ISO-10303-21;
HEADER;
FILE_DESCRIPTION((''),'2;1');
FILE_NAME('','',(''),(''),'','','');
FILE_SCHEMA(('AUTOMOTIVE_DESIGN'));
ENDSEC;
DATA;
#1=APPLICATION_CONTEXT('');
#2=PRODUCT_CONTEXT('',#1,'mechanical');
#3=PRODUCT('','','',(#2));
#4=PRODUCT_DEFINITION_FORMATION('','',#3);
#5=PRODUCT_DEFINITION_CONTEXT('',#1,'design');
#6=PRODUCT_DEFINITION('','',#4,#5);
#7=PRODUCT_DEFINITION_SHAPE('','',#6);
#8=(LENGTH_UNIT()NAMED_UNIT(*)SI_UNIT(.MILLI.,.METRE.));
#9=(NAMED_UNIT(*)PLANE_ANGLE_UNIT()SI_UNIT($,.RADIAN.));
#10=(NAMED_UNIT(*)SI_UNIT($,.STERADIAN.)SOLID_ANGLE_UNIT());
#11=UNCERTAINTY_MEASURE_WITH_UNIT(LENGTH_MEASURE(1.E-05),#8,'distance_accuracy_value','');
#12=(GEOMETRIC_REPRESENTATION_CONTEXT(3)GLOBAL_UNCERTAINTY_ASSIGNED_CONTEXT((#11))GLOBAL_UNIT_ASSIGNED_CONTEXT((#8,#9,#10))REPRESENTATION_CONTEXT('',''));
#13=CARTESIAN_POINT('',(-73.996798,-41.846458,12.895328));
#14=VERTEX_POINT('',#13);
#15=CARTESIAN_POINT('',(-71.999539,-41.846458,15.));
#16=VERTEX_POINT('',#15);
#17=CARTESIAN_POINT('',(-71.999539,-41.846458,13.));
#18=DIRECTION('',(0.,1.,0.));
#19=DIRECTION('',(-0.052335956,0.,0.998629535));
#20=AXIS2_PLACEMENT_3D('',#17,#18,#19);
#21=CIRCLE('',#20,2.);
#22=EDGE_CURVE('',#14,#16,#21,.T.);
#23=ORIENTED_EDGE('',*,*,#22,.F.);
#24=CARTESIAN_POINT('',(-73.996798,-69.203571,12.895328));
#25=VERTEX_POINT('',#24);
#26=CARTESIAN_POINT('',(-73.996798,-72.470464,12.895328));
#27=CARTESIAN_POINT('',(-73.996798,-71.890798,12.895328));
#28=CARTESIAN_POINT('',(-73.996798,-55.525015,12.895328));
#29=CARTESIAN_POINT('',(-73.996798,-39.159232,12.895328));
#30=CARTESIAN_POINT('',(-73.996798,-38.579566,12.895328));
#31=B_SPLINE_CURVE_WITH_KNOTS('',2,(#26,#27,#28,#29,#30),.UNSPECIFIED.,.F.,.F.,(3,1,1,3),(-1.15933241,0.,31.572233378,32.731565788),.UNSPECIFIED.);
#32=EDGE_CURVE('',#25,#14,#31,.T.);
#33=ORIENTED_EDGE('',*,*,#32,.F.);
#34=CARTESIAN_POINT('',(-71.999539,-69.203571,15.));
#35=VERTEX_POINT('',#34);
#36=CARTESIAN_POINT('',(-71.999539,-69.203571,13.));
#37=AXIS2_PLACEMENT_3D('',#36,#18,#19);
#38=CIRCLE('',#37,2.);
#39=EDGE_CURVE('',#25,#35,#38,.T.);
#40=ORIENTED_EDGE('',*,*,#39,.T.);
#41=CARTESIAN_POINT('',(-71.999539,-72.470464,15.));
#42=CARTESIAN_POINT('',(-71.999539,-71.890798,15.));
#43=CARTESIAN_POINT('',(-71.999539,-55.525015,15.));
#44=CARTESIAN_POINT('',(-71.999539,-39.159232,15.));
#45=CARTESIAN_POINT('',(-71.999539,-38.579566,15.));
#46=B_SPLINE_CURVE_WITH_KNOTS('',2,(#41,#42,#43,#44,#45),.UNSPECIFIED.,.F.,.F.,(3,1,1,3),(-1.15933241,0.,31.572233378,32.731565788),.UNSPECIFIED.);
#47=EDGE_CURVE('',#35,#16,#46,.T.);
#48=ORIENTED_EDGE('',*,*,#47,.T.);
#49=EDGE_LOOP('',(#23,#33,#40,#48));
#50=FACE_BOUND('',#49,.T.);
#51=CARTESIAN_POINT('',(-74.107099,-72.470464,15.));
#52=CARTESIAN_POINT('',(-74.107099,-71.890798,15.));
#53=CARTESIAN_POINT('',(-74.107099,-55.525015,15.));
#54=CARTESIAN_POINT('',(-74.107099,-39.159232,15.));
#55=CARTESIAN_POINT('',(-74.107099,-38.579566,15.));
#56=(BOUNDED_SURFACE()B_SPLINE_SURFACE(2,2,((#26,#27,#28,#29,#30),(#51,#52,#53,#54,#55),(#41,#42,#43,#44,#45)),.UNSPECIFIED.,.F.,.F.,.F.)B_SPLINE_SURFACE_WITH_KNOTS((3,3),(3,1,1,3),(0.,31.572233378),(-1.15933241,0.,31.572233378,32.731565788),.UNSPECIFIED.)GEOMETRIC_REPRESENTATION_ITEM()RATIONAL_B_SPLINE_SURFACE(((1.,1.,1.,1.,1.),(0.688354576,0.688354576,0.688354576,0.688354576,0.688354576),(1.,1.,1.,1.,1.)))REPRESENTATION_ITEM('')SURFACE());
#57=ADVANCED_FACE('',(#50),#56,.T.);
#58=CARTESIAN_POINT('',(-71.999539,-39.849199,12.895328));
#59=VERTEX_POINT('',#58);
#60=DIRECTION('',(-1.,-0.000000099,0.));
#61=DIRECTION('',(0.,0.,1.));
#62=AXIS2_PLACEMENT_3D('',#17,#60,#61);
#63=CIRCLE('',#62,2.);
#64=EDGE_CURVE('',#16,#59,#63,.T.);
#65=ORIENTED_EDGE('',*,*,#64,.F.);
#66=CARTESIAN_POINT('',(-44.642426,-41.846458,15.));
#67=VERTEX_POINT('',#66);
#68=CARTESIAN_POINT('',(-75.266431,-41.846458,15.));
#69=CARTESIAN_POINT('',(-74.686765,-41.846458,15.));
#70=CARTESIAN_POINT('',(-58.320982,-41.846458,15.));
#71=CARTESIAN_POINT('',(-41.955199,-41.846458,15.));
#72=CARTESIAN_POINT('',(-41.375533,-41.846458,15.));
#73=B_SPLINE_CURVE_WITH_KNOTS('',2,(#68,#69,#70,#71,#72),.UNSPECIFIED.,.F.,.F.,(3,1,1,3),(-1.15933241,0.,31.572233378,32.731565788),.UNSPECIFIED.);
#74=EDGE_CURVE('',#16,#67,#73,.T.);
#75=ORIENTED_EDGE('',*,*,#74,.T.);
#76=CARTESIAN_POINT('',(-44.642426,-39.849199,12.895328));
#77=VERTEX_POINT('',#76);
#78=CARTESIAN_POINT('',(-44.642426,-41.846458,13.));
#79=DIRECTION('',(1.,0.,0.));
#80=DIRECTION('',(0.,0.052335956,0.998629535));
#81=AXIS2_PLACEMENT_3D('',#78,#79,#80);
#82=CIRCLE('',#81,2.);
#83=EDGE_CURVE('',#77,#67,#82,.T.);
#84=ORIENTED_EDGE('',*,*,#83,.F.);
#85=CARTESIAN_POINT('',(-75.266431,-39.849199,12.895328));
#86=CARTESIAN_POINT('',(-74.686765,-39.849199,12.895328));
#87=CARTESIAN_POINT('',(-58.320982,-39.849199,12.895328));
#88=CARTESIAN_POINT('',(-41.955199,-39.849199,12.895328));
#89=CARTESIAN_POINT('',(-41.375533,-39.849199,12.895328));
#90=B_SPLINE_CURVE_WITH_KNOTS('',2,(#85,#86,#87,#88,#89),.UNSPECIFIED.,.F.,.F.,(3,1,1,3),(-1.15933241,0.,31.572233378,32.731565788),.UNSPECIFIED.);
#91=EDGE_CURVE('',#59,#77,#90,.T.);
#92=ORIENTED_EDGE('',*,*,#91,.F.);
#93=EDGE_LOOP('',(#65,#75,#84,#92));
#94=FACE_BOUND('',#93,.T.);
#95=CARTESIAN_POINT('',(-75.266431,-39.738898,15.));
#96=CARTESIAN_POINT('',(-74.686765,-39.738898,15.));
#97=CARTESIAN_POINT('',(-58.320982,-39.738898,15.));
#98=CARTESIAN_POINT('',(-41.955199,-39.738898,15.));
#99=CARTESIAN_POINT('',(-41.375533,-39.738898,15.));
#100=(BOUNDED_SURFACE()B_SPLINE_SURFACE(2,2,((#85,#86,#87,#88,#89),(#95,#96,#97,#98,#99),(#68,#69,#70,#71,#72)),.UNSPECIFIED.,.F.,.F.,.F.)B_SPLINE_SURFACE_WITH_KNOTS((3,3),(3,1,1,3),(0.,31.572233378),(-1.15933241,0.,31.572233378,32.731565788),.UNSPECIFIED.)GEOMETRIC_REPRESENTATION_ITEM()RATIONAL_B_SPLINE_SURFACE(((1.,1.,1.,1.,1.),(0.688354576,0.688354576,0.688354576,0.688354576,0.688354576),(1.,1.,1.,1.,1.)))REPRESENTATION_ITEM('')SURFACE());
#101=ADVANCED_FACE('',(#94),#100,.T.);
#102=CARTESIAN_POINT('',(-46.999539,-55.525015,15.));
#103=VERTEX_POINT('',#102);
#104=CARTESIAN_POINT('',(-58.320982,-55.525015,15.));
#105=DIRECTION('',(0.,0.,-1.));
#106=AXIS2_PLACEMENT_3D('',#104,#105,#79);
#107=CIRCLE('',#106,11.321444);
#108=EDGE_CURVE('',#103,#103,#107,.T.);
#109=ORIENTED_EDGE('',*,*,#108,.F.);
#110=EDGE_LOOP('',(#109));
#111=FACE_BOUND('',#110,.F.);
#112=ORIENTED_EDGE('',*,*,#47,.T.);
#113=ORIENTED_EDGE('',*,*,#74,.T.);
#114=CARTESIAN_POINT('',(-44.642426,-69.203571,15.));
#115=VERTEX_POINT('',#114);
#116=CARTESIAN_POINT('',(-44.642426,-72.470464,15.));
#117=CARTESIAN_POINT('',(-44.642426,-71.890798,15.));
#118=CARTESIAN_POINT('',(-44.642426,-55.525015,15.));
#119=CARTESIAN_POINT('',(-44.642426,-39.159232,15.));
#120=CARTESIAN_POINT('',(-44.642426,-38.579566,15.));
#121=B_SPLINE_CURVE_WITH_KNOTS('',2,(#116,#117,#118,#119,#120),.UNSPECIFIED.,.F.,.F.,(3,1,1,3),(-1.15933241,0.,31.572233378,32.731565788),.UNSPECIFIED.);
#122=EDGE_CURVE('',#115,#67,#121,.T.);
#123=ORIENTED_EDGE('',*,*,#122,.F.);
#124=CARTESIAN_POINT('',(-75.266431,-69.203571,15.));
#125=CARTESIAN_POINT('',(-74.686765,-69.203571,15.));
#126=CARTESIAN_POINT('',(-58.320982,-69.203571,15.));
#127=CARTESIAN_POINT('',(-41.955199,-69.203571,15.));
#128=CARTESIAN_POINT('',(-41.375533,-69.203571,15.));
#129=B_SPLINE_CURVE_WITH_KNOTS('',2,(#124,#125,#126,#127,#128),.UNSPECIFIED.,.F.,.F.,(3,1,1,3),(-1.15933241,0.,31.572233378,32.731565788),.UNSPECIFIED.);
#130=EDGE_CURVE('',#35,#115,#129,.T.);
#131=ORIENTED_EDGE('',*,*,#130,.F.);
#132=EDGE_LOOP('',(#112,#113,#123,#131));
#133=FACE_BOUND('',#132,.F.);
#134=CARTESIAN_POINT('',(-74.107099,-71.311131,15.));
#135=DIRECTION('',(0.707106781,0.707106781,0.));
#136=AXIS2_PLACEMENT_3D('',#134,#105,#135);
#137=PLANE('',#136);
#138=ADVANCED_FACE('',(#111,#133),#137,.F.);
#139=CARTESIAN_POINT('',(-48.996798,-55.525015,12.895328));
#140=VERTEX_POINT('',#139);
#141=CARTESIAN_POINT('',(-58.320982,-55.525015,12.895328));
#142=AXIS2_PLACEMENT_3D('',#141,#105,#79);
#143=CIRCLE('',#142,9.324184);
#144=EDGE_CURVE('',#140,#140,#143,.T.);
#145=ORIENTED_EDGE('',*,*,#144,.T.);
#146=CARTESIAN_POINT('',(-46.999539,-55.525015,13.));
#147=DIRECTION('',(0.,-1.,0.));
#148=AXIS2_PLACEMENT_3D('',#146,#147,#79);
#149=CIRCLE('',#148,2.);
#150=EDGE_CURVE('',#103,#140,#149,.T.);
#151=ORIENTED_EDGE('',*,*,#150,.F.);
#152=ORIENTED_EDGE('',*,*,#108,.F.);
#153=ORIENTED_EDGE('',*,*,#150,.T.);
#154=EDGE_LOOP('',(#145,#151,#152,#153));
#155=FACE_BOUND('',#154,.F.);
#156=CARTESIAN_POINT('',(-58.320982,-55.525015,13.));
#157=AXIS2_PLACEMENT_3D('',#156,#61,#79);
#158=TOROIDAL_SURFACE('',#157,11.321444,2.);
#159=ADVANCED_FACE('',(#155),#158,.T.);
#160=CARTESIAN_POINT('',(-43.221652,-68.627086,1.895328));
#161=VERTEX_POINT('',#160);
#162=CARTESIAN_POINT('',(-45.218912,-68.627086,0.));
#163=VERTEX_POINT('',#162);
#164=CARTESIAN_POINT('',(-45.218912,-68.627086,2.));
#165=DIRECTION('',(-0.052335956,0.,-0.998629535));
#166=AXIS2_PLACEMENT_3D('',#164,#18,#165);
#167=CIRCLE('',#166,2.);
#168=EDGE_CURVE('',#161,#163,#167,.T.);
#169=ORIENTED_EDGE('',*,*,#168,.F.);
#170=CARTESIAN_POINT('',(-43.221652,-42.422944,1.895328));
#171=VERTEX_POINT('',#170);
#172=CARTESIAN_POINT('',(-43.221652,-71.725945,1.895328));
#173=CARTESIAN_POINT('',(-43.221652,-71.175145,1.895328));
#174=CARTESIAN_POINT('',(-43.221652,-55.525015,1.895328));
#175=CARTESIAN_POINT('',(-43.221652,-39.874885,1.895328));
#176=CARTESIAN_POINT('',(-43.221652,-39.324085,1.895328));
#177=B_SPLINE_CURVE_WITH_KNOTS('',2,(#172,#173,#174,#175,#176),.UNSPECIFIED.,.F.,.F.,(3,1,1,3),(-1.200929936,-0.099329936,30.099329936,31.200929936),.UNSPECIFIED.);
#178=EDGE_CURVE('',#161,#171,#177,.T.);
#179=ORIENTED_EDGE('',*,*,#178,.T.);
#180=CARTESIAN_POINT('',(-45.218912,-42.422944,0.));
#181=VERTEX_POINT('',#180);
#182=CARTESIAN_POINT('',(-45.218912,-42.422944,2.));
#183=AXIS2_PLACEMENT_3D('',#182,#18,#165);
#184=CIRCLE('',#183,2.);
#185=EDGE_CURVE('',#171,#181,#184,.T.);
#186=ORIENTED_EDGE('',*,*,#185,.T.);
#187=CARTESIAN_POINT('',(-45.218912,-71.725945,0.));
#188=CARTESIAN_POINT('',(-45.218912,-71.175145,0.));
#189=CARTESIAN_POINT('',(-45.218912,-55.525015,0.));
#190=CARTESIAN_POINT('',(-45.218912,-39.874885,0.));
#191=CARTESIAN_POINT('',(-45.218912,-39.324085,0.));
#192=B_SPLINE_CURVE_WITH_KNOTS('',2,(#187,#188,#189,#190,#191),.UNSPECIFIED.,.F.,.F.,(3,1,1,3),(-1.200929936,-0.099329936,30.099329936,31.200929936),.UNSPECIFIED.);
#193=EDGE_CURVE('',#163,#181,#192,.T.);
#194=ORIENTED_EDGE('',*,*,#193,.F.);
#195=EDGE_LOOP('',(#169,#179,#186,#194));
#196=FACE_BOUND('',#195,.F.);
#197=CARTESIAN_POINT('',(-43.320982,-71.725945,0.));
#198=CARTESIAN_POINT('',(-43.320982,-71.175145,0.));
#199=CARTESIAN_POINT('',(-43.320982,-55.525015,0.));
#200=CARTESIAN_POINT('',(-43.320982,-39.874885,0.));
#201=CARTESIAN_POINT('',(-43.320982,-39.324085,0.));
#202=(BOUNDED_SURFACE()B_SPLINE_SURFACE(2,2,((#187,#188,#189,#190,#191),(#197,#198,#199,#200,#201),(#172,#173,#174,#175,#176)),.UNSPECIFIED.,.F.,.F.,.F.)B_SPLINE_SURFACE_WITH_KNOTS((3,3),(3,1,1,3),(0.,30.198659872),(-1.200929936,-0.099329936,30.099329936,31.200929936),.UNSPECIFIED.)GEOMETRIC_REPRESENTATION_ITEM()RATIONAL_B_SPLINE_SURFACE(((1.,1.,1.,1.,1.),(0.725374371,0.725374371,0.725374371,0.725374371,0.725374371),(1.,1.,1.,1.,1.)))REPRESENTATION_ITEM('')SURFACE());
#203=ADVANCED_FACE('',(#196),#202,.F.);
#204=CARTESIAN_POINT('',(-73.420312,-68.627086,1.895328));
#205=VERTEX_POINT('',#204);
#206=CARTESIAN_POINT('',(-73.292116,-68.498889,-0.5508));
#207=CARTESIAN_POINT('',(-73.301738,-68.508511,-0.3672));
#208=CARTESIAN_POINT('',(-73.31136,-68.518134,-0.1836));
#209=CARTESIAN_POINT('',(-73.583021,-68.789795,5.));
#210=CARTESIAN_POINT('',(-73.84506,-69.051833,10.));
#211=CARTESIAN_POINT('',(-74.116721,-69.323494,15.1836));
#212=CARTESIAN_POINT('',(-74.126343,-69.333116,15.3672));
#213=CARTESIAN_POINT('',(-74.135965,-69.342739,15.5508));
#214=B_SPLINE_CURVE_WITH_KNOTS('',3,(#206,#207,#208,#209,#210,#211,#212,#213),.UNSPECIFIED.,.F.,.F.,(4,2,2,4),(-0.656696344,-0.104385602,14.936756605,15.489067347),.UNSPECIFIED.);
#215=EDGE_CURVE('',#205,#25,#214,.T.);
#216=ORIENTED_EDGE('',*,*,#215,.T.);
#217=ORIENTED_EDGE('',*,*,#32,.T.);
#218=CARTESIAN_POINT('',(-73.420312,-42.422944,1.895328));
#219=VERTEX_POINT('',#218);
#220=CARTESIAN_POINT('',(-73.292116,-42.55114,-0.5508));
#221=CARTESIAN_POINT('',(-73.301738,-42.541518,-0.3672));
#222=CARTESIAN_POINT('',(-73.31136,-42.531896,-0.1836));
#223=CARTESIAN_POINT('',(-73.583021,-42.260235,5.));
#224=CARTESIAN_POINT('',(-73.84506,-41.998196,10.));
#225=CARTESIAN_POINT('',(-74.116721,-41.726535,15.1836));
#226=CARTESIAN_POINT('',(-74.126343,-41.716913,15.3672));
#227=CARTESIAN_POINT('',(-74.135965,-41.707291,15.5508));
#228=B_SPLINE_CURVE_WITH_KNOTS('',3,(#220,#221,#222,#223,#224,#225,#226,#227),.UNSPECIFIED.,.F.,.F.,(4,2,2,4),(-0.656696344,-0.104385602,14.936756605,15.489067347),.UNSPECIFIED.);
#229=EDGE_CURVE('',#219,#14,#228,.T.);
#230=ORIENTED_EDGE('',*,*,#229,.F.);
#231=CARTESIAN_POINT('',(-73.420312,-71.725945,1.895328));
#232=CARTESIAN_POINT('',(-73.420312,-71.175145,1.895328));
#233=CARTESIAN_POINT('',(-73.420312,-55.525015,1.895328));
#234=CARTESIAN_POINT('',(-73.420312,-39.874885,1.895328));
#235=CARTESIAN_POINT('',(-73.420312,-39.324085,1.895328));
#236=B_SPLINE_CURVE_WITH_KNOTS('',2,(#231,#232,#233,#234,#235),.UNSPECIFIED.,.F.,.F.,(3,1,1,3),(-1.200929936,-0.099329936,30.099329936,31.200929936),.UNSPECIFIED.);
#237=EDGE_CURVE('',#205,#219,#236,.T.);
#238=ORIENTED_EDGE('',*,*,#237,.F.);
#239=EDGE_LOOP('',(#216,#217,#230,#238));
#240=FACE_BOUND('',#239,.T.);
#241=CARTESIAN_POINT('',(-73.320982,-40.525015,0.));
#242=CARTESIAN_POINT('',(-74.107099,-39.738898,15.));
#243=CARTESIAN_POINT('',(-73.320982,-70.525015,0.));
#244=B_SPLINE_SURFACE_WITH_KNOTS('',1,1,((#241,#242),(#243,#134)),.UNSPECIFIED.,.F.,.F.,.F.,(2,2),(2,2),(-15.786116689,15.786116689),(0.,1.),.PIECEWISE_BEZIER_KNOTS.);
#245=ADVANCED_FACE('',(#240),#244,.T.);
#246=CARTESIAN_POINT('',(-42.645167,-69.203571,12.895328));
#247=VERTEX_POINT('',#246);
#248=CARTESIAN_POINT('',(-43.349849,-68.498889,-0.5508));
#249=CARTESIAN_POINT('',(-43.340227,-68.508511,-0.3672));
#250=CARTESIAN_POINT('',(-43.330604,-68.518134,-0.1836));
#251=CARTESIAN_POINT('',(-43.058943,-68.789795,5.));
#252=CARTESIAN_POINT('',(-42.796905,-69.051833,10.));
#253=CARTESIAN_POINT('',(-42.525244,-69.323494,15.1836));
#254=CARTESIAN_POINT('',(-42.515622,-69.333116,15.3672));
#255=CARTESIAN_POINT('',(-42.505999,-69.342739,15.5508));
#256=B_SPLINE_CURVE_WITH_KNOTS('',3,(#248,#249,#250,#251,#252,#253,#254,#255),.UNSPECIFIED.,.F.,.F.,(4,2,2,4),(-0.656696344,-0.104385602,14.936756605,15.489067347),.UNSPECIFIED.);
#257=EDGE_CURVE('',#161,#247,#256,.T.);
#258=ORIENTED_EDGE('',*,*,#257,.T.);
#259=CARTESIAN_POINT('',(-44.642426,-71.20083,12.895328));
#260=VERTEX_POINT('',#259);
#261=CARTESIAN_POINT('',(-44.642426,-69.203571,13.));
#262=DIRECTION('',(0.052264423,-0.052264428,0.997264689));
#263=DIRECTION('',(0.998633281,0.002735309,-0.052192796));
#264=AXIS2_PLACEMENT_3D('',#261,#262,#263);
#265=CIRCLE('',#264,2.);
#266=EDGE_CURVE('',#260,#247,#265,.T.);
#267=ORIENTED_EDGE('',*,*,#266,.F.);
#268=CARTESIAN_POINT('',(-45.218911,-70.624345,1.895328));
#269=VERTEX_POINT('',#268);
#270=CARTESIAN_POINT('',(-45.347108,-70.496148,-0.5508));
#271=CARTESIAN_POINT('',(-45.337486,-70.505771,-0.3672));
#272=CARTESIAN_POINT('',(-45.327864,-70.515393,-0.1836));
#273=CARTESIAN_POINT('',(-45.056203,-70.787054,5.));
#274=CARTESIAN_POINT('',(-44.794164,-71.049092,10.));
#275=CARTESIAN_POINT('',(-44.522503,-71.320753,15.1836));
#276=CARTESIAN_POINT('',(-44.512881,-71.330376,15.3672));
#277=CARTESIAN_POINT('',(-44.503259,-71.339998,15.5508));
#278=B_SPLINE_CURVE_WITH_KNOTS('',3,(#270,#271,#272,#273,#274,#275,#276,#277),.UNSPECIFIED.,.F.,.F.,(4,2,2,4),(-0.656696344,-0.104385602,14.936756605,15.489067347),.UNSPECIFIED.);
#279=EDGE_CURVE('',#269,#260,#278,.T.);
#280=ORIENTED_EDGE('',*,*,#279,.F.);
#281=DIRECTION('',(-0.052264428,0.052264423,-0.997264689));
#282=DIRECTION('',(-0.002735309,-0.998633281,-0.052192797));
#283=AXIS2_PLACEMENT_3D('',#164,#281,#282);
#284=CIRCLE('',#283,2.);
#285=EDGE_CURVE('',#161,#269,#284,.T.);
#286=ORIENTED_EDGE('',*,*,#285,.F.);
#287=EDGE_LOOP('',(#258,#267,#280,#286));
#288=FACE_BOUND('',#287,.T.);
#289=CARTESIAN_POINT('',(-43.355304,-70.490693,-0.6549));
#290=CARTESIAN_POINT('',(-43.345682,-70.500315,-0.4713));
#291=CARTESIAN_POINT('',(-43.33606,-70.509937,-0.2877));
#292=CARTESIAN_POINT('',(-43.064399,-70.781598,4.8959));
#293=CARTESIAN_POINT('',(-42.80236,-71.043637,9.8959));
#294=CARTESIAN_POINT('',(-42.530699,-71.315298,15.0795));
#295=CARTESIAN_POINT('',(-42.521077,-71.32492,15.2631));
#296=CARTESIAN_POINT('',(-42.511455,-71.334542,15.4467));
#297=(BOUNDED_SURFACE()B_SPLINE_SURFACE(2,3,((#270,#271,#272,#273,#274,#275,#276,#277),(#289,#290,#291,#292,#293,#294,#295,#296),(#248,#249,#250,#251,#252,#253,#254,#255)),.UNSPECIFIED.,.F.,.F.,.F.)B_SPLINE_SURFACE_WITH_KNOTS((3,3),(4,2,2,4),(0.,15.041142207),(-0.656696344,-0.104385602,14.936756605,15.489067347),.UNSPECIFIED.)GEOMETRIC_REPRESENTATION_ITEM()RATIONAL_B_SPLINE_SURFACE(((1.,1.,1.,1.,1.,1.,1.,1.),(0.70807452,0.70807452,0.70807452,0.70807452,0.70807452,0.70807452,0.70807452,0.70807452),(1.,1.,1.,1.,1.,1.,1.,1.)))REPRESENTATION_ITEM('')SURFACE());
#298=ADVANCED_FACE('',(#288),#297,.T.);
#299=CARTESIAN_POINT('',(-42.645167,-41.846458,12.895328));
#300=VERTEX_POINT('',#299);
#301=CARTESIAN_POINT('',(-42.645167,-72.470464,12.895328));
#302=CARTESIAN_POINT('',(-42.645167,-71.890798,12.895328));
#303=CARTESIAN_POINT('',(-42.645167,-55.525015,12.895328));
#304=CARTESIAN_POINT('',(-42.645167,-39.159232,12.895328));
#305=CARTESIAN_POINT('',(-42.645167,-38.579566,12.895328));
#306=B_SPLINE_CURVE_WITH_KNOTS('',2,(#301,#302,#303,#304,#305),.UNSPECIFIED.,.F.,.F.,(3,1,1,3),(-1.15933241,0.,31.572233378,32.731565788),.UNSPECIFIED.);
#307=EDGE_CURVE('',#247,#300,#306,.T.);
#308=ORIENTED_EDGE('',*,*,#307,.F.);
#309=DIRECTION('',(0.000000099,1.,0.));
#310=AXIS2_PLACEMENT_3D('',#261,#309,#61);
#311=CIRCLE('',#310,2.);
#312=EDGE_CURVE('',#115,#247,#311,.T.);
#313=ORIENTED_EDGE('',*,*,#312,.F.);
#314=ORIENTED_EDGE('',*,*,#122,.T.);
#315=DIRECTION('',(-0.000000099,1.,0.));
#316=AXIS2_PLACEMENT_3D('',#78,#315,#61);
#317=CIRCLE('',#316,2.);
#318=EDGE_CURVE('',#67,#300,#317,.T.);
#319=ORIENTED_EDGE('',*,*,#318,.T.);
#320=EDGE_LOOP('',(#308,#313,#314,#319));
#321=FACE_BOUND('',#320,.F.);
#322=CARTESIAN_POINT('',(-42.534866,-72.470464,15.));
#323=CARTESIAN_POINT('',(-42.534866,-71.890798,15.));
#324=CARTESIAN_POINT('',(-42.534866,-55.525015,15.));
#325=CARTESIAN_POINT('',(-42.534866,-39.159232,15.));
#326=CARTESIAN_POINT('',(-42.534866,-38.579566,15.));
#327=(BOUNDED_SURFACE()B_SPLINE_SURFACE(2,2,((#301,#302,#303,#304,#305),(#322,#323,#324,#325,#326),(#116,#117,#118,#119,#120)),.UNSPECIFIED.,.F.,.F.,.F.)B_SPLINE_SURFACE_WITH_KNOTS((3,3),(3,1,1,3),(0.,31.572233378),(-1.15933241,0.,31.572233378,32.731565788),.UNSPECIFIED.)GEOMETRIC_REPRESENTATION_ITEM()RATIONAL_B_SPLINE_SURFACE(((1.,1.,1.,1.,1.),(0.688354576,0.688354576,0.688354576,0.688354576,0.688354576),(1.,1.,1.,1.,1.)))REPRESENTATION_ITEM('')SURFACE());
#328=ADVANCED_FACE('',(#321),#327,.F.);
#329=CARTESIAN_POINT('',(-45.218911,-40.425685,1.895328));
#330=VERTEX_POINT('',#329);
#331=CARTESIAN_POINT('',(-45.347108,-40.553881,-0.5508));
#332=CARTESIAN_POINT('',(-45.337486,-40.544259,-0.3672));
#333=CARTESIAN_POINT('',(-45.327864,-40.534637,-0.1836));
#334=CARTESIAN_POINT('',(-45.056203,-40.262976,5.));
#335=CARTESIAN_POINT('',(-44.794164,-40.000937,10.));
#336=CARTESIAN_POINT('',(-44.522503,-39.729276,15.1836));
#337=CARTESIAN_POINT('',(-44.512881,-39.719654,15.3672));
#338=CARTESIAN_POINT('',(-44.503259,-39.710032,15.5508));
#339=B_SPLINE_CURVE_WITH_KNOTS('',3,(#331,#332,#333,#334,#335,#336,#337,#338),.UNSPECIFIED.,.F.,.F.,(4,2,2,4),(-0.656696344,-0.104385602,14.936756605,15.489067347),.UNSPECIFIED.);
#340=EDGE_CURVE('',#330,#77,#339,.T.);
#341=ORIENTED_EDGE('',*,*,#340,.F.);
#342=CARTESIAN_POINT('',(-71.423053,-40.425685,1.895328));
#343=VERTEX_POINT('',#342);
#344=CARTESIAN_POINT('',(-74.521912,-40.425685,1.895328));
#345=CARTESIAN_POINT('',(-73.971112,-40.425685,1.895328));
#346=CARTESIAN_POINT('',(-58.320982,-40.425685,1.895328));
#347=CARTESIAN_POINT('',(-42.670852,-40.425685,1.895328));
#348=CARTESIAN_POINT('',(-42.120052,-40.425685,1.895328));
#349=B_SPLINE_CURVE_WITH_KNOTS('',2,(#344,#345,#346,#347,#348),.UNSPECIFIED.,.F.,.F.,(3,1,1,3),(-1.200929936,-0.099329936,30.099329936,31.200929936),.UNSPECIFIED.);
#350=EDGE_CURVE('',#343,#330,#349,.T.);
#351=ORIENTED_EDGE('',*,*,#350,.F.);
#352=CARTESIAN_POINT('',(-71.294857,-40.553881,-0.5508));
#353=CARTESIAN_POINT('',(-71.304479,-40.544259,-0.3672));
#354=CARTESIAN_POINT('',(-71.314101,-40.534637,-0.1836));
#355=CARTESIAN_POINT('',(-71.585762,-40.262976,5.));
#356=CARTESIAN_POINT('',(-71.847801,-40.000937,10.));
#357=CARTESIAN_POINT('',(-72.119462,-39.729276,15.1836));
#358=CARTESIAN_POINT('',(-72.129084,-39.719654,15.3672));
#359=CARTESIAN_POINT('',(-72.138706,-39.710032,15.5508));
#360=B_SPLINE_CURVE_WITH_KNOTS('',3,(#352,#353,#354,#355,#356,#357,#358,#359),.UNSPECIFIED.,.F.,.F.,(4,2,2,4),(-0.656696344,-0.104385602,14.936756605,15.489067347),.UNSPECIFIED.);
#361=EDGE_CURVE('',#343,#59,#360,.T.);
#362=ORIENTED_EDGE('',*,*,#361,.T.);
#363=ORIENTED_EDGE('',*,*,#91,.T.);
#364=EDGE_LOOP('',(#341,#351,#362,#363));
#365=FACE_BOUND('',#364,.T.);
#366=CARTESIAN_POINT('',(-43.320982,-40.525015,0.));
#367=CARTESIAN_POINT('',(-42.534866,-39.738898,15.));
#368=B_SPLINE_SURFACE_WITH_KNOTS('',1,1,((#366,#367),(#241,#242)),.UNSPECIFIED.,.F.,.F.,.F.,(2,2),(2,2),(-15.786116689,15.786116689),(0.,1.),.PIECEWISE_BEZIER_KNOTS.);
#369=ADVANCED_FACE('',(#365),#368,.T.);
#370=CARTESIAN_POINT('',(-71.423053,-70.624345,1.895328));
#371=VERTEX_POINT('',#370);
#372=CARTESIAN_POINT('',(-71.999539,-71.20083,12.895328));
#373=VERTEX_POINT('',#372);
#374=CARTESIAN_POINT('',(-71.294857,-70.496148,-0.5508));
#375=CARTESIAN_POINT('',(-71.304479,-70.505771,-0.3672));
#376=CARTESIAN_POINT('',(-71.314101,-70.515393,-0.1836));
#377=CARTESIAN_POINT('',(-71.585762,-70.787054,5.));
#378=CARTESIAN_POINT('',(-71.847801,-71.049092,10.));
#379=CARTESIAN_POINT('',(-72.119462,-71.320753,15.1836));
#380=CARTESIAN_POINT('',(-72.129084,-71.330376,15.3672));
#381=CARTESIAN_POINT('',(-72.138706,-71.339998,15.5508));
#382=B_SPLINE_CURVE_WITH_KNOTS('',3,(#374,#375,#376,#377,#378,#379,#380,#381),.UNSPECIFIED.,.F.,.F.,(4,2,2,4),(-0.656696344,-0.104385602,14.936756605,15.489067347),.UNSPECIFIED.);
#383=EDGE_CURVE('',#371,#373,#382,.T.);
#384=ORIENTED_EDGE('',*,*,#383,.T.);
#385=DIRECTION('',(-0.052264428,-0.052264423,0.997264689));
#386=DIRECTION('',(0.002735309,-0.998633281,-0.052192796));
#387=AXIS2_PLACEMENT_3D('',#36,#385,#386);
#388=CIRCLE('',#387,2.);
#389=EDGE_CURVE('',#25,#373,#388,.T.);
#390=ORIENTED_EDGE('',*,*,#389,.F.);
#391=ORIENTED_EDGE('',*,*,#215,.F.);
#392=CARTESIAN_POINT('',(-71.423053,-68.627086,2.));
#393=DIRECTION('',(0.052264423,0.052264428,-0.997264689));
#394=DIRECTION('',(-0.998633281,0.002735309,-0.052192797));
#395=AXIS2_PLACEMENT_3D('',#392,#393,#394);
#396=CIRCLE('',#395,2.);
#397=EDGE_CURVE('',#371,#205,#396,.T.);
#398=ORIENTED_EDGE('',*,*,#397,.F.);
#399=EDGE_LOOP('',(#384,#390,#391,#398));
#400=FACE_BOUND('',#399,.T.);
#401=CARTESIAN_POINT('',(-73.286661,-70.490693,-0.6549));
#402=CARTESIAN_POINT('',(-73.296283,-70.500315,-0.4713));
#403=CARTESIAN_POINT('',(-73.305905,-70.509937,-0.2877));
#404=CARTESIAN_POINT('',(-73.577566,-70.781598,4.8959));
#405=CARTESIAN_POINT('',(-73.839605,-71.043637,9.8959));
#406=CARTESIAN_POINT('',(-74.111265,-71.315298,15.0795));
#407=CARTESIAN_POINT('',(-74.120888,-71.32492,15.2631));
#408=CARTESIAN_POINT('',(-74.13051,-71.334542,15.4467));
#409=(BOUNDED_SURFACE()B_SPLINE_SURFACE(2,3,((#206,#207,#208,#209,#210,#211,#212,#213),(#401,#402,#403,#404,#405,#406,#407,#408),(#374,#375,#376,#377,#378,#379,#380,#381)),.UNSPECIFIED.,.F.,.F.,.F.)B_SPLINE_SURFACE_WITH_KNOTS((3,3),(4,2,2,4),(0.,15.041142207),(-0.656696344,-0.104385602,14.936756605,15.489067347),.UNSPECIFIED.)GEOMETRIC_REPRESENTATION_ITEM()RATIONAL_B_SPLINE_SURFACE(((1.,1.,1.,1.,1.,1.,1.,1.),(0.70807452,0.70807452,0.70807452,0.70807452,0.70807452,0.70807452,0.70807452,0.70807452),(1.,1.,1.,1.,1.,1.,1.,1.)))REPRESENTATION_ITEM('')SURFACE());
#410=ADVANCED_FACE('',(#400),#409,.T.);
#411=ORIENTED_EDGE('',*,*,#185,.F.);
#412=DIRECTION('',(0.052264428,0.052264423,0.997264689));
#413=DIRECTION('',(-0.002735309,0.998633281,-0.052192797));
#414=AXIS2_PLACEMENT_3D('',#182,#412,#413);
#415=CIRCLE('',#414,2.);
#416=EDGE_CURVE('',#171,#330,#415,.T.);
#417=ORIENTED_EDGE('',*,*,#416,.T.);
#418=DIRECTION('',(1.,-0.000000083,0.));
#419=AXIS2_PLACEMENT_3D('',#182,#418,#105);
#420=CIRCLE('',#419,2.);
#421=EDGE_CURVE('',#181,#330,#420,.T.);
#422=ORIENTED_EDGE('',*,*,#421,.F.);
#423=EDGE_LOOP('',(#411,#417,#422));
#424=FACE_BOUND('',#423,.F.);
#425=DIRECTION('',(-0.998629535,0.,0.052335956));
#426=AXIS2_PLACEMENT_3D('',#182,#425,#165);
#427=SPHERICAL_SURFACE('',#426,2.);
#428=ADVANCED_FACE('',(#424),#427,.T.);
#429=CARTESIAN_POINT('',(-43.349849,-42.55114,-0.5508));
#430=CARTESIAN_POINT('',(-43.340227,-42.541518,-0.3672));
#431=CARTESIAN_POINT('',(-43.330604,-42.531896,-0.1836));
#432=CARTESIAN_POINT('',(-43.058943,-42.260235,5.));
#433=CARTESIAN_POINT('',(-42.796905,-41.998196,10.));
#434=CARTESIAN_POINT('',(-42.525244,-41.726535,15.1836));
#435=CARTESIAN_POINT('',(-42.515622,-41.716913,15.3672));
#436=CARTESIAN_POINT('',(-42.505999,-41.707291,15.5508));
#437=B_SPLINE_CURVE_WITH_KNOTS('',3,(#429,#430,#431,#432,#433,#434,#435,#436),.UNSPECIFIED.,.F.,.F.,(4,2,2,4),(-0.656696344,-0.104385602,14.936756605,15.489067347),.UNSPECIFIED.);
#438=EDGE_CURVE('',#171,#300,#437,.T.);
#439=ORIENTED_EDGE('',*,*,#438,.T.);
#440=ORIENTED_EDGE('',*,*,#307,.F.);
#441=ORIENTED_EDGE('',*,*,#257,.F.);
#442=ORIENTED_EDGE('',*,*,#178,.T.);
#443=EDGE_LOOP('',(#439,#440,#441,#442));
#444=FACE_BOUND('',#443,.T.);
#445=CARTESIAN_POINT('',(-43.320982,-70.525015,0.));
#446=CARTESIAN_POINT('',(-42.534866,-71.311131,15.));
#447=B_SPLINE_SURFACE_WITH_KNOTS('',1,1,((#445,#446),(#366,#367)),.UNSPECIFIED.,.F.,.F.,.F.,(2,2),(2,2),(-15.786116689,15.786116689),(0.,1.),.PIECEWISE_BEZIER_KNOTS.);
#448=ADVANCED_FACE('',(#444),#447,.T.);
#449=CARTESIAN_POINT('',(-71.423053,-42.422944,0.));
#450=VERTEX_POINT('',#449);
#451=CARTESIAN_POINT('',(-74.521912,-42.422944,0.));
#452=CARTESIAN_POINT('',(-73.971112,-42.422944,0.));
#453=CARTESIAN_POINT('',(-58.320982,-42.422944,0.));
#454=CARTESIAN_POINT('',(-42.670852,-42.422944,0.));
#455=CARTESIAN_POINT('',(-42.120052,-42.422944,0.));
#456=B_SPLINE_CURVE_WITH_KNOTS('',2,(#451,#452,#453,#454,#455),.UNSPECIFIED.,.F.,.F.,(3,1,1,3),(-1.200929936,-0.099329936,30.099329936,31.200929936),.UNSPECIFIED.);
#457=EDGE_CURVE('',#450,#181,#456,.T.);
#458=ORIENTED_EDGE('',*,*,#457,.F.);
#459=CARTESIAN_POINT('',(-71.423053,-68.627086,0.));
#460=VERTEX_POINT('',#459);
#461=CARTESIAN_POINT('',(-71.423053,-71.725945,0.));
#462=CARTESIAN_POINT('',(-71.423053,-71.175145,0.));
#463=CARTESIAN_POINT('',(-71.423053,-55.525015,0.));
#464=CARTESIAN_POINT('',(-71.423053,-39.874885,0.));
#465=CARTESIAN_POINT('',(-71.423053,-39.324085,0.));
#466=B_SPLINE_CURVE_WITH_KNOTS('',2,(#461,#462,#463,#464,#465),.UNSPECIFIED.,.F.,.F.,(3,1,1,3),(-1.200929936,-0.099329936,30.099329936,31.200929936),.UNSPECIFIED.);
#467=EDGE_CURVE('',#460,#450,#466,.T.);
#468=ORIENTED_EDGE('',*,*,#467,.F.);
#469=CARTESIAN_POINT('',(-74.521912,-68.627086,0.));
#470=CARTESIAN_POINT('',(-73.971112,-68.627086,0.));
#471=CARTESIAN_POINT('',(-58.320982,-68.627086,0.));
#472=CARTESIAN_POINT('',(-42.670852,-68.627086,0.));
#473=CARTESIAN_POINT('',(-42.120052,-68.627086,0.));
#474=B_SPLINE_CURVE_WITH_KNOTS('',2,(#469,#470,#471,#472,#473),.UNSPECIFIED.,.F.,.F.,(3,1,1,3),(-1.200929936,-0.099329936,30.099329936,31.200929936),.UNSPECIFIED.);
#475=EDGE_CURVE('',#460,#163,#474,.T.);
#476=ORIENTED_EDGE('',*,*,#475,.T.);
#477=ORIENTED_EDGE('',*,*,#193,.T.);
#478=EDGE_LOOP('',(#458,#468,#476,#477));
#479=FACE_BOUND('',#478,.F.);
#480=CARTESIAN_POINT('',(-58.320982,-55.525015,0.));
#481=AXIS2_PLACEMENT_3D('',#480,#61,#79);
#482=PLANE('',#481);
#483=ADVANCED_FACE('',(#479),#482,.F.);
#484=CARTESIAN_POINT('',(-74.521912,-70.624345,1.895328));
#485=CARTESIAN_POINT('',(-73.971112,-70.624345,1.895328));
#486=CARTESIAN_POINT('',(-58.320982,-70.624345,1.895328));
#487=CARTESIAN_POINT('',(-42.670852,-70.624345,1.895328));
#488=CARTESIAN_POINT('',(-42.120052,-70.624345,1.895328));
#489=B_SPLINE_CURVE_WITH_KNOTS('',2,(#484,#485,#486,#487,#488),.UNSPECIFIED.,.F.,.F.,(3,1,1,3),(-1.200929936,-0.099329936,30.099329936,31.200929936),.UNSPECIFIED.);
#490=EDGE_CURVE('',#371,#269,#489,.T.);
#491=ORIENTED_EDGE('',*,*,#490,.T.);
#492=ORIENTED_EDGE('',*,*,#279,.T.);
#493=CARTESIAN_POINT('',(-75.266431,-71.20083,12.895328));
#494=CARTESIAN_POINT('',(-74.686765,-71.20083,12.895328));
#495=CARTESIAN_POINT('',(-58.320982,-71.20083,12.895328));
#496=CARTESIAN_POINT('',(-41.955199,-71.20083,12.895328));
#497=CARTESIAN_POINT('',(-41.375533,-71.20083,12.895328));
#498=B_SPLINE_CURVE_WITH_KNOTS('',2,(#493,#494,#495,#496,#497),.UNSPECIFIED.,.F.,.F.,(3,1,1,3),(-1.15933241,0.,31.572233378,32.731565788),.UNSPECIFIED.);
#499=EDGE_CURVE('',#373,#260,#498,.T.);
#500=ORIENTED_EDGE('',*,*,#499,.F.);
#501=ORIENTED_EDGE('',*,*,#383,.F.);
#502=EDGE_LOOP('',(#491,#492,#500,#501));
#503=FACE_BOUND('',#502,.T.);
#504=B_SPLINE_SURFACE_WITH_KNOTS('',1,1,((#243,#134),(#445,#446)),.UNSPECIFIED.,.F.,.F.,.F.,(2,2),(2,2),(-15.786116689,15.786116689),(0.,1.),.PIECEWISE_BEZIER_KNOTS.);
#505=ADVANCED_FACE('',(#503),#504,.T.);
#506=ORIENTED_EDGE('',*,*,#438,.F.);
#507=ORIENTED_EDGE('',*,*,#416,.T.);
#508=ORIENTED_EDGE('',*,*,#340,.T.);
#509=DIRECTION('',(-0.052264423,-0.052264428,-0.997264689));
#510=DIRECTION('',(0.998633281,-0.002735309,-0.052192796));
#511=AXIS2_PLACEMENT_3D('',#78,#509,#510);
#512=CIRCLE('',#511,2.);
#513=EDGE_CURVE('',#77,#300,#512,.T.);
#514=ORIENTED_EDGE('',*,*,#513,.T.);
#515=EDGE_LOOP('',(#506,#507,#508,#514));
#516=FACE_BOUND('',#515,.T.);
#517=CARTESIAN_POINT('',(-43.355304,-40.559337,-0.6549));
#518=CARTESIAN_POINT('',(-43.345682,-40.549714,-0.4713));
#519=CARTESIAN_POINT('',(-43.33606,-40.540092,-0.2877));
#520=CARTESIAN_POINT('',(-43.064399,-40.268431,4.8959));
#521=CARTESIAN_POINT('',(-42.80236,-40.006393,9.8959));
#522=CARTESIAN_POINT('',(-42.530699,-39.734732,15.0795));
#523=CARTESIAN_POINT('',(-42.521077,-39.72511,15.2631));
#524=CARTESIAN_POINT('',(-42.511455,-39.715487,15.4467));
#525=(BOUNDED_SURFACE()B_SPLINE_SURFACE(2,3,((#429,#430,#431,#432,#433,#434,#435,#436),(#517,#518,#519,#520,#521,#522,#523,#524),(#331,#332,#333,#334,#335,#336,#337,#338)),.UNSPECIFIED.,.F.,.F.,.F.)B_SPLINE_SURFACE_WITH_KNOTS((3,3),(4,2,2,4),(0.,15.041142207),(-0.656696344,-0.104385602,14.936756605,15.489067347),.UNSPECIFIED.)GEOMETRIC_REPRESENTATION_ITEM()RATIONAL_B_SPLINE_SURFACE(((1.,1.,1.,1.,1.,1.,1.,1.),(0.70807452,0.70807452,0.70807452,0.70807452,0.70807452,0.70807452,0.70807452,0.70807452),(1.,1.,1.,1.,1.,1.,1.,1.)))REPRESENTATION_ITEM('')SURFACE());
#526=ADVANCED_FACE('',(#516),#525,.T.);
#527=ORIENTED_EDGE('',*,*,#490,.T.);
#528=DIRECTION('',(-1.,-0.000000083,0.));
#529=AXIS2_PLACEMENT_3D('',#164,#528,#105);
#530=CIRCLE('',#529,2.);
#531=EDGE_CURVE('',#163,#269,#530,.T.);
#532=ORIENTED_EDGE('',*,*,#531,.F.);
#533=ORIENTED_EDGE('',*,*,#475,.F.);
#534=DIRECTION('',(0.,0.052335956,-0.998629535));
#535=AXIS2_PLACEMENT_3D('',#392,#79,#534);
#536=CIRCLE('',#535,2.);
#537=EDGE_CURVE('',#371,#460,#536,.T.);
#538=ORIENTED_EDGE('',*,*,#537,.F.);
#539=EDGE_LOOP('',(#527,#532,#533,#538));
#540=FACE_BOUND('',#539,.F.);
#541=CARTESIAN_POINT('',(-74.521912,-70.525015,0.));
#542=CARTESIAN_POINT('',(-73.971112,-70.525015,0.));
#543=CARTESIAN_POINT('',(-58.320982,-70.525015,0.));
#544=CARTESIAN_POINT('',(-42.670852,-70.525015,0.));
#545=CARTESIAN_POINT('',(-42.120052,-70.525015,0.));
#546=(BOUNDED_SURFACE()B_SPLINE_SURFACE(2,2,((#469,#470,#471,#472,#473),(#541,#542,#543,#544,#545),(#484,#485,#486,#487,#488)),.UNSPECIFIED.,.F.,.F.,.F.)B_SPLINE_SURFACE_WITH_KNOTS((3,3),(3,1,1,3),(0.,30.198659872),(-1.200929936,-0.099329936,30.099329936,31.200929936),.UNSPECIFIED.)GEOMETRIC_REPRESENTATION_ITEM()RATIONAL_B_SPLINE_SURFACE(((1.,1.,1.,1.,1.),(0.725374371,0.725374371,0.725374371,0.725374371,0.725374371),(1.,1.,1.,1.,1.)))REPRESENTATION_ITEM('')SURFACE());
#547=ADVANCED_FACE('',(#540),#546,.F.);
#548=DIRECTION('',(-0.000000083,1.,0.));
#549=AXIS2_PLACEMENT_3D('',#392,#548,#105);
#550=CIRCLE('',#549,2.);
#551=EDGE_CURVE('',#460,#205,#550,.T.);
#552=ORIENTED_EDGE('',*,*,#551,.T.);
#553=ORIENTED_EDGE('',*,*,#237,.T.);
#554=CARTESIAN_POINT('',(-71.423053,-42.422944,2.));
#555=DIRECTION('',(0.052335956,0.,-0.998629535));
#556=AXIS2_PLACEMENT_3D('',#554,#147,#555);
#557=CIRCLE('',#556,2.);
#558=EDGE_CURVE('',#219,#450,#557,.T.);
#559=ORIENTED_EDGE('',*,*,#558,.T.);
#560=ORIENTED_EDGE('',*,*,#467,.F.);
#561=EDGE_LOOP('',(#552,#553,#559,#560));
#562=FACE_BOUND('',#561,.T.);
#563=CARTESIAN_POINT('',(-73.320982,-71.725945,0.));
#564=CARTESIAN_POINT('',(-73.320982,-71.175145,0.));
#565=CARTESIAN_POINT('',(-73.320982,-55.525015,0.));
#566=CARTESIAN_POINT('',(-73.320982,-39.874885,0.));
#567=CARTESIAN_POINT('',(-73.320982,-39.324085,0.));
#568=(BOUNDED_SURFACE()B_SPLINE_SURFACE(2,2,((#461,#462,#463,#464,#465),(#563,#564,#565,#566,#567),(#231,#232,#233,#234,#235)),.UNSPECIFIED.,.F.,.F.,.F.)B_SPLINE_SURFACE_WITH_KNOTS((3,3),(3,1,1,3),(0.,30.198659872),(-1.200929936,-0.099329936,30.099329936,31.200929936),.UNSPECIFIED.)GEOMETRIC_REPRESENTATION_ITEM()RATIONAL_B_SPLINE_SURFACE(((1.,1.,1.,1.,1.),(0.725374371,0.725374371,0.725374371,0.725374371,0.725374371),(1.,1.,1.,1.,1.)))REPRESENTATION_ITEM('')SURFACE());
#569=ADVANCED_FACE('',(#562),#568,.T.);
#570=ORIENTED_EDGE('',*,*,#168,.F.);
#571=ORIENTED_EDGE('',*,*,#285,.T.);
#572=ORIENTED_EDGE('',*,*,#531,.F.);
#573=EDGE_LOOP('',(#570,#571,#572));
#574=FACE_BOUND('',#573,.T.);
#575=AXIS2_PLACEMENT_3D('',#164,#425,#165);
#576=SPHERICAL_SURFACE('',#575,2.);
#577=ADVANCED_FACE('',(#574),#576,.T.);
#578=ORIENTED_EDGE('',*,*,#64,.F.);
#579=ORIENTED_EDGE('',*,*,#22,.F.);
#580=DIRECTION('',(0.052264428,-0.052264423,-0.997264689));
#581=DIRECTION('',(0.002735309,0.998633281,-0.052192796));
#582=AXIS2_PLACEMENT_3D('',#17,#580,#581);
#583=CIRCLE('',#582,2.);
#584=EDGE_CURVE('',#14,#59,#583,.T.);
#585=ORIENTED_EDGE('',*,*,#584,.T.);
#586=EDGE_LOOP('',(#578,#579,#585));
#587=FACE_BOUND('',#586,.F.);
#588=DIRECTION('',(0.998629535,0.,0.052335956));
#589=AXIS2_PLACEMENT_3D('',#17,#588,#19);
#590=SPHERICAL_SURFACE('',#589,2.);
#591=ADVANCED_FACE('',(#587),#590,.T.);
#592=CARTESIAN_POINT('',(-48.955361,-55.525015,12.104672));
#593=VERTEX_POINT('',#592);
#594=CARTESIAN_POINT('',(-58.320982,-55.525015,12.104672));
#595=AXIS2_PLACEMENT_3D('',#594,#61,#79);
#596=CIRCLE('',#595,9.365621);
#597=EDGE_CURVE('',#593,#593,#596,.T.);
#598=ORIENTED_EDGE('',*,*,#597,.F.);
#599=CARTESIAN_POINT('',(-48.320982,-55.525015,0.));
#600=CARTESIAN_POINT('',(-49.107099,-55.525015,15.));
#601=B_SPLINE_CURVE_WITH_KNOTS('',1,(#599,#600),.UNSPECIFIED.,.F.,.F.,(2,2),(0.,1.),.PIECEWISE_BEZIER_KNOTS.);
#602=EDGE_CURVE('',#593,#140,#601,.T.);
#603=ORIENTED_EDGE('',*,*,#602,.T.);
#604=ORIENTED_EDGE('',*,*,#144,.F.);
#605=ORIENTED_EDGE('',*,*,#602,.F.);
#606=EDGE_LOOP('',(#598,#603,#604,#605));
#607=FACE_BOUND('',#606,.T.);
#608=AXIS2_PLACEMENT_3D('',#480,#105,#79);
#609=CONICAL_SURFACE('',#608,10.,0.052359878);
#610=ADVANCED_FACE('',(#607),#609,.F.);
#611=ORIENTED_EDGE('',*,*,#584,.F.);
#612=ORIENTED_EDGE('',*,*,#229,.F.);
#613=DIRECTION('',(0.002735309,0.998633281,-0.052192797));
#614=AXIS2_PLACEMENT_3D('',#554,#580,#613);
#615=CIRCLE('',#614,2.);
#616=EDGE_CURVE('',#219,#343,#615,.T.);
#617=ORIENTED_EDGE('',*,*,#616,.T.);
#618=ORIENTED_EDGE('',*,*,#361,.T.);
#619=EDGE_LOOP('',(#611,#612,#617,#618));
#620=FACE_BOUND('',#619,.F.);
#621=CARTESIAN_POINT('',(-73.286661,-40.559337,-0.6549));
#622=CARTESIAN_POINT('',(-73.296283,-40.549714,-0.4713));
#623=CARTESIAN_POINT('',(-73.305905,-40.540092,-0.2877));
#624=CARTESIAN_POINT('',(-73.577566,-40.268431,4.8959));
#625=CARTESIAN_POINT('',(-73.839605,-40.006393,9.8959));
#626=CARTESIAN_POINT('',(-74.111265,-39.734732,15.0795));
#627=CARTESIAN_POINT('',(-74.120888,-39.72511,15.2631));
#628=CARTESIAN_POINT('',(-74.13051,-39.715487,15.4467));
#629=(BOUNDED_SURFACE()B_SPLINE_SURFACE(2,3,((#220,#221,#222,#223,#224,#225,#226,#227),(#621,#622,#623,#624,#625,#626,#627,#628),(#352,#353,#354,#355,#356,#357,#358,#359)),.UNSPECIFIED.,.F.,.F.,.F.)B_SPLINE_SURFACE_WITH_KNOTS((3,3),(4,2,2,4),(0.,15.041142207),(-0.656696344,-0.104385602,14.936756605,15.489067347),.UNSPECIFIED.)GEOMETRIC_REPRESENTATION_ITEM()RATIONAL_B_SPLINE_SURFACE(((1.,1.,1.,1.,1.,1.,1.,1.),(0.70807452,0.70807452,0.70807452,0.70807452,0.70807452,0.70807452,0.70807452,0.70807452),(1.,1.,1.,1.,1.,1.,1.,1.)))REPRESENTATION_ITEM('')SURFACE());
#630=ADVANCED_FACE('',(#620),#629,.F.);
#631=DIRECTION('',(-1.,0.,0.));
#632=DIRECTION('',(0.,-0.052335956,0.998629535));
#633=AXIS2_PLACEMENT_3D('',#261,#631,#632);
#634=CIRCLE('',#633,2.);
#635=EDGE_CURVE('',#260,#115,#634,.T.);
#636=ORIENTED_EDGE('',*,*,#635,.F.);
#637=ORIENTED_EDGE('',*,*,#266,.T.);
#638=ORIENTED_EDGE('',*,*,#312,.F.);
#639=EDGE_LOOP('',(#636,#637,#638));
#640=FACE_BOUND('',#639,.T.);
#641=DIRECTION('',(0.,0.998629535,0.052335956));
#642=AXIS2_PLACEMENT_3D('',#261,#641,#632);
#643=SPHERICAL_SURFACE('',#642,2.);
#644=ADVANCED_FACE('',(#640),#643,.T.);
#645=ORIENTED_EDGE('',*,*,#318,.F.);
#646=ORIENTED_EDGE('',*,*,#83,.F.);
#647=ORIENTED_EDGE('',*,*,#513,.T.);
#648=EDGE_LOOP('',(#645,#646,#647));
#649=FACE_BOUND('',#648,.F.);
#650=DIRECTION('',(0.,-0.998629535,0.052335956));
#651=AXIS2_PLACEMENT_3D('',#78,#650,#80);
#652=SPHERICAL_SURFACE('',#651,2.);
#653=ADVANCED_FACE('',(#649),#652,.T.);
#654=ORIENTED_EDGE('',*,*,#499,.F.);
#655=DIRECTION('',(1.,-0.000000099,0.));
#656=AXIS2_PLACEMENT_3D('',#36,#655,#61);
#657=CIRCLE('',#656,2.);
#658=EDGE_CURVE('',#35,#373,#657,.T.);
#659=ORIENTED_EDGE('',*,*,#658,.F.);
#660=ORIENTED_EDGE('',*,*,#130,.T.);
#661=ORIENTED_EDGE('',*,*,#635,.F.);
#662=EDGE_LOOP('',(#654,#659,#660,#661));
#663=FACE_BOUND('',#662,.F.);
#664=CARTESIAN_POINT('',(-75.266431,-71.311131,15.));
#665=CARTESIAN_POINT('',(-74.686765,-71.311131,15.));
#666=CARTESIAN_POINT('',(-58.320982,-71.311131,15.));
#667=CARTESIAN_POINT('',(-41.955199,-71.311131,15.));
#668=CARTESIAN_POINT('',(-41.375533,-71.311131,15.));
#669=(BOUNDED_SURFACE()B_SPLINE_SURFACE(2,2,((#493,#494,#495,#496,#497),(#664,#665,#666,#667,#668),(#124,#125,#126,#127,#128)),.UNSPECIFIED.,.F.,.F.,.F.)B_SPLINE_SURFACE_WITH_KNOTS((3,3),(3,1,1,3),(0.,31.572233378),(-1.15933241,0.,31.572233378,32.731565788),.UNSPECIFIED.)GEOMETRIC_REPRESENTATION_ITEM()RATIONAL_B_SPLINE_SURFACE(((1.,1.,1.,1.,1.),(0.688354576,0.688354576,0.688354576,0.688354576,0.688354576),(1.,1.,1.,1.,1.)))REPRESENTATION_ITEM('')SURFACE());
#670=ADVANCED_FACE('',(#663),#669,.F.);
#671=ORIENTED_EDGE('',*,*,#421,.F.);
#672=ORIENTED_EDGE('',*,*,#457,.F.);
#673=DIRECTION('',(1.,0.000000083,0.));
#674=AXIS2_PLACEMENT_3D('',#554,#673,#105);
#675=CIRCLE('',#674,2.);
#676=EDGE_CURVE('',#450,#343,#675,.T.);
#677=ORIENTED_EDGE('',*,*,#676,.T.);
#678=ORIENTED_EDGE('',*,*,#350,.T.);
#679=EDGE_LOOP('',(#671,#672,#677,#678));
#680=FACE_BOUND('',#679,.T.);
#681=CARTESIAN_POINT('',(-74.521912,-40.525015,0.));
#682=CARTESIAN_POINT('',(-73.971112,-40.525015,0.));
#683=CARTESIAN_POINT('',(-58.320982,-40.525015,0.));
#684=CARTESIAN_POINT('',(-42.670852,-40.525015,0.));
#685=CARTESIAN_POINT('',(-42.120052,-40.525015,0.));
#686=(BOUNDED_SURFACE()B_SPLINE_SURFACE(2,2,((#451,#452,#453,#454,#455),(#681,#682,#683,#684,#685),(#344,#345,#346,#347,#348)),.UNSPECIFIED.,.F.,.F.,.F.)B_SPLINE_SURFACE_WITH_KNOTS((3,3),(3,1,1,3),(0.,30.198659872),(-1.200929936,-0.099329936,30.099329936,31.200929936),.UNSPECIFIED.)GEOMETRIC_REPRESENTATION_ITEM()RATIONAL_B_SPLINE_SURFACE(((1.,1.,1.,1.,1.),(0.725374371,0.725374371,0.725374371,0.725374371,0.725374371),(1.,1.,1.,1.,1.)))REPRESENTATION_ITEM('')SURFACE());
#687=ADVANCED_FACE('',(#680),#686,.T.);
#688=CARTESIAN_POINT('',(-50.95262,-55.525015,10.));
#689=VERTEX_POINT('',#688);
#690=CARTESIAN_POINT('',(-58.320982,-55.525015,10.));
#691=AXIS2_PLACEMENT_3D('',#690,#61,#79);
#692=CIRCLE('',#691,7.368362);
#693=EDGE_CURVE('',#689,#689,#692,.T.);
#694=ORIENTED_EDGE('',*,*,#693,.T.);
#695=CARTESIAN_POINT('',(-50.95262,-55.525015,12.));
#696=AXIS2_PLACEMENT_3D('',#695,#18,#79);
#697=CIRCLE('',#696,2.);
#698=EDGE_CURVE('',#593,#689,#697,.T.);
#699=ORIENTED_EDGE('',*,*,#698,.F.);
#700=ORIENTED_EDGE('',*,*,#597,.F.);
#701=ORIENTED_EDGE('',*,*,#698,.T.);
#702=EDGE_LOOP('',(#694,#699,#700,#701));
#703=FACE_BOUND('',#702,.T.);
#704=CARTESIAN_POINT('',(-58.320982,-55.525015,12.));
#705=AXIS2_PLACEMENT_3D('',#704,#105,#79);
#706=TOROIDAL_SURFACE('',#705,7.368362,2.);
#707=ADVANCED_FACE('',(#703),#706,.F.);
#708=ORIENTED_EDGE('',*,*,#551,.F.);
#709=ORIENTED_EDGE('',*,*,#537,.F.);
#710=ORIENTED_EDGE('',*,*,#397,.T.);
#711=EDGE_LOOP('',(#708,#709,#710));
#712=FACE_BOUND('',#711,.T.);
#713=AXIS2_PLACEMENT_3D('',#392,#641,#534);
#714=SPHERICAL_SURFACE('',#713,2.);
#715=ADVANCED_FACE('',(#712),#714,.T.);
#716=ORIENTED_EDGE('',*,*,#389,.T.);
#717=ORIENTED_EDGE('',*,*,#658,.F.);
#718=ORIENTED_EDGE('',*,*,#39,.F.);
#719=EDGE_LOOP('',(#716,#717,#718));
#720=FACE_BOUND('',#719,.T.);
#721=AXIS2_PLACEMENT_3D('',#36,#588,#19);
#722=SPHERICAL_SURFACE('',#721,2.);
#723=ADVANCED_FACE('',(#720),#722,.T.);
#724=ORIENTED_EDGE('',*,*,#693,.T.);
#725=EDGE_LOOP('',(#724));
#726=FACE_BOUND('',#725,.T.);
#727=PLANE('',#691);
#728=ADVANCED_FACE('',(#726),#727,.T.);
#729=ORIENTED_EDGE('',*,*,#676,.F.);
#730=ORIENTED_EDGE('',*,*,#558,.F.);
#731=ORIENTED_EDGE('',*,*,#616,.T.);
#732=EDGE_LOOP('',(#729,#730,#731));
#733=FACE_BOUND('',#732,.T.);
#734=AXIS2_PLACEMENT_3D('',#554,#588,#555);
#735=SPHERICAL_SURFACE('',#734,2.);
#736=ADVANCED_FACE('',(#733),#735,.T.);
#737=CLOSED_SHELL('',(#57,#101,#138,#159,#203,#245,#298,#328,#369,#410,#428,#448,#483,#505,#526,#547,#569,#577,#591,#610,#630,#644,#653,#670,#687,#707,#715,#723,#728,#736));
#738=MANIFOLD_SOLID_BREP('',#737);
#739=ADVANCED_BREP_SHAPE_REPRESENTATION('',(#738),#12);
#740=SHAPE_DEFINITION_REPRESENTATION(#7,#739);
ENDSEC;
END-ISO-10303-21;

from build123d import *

# Parameters (mm, degrees)
F0_W     = 30
F0_H     = 30
F0_R     = 10
F1_DEPTH = 15
F1_TAPER = -3
F2_DEPTH = 10
F3_R     = 2


with BuildPart() as f1:
    # F0 (on Top) → F1 (new body)
    with BuildSketch(Plane.XY):
        with Locations((-58.3209823817, -55.5250146758)):
            Rectangle(F0_W, F0_H)
        with Locations((-58.3209823817, -55.5250146758)):
            Circle(F0_R, mode=Mode.SUBTRACT)
    extrude(amount=F1_DEPTH, taper=F1_TAPER)

    # F0 (on Top) → F2 (join)
    with BuildSketch(Plane.XY):
        with Locations((-58.3209823817, -55.5250146758)):
            Circle(F0_R)
    extrude(amount=F2_DEPTH)

    # F3
    f3_edges = [f1.edges().sort_by_distance(p)[0] for p in [
        (-67.796905, -55.525015, 10),
        (-67.534866, -55.525015, 15),
        (-42.534866, -55.525015, 15),
        (-58.320982, -39.738898, 15),
        (-58.320982, -71.311131, 15),
        (-74.107099, -55.525015, 15),
        (-58.320982, -40.525015, 0),
        (-73.320982, -55.525015, 0),
        (-58.320982, -70.525015, 0),
        (-43.320982, -55.525015, 0),
        (-42.927924, -70.918073, 7.5),
        (-42.927924, -40.131956, 7.5),
        (-73.714041, -70.918073, 7.5),
        (-73.714041, -40.131956, 7.5),
    ]]
    fillet(f3_edges, radius=F3_R)


solid = f1.part
